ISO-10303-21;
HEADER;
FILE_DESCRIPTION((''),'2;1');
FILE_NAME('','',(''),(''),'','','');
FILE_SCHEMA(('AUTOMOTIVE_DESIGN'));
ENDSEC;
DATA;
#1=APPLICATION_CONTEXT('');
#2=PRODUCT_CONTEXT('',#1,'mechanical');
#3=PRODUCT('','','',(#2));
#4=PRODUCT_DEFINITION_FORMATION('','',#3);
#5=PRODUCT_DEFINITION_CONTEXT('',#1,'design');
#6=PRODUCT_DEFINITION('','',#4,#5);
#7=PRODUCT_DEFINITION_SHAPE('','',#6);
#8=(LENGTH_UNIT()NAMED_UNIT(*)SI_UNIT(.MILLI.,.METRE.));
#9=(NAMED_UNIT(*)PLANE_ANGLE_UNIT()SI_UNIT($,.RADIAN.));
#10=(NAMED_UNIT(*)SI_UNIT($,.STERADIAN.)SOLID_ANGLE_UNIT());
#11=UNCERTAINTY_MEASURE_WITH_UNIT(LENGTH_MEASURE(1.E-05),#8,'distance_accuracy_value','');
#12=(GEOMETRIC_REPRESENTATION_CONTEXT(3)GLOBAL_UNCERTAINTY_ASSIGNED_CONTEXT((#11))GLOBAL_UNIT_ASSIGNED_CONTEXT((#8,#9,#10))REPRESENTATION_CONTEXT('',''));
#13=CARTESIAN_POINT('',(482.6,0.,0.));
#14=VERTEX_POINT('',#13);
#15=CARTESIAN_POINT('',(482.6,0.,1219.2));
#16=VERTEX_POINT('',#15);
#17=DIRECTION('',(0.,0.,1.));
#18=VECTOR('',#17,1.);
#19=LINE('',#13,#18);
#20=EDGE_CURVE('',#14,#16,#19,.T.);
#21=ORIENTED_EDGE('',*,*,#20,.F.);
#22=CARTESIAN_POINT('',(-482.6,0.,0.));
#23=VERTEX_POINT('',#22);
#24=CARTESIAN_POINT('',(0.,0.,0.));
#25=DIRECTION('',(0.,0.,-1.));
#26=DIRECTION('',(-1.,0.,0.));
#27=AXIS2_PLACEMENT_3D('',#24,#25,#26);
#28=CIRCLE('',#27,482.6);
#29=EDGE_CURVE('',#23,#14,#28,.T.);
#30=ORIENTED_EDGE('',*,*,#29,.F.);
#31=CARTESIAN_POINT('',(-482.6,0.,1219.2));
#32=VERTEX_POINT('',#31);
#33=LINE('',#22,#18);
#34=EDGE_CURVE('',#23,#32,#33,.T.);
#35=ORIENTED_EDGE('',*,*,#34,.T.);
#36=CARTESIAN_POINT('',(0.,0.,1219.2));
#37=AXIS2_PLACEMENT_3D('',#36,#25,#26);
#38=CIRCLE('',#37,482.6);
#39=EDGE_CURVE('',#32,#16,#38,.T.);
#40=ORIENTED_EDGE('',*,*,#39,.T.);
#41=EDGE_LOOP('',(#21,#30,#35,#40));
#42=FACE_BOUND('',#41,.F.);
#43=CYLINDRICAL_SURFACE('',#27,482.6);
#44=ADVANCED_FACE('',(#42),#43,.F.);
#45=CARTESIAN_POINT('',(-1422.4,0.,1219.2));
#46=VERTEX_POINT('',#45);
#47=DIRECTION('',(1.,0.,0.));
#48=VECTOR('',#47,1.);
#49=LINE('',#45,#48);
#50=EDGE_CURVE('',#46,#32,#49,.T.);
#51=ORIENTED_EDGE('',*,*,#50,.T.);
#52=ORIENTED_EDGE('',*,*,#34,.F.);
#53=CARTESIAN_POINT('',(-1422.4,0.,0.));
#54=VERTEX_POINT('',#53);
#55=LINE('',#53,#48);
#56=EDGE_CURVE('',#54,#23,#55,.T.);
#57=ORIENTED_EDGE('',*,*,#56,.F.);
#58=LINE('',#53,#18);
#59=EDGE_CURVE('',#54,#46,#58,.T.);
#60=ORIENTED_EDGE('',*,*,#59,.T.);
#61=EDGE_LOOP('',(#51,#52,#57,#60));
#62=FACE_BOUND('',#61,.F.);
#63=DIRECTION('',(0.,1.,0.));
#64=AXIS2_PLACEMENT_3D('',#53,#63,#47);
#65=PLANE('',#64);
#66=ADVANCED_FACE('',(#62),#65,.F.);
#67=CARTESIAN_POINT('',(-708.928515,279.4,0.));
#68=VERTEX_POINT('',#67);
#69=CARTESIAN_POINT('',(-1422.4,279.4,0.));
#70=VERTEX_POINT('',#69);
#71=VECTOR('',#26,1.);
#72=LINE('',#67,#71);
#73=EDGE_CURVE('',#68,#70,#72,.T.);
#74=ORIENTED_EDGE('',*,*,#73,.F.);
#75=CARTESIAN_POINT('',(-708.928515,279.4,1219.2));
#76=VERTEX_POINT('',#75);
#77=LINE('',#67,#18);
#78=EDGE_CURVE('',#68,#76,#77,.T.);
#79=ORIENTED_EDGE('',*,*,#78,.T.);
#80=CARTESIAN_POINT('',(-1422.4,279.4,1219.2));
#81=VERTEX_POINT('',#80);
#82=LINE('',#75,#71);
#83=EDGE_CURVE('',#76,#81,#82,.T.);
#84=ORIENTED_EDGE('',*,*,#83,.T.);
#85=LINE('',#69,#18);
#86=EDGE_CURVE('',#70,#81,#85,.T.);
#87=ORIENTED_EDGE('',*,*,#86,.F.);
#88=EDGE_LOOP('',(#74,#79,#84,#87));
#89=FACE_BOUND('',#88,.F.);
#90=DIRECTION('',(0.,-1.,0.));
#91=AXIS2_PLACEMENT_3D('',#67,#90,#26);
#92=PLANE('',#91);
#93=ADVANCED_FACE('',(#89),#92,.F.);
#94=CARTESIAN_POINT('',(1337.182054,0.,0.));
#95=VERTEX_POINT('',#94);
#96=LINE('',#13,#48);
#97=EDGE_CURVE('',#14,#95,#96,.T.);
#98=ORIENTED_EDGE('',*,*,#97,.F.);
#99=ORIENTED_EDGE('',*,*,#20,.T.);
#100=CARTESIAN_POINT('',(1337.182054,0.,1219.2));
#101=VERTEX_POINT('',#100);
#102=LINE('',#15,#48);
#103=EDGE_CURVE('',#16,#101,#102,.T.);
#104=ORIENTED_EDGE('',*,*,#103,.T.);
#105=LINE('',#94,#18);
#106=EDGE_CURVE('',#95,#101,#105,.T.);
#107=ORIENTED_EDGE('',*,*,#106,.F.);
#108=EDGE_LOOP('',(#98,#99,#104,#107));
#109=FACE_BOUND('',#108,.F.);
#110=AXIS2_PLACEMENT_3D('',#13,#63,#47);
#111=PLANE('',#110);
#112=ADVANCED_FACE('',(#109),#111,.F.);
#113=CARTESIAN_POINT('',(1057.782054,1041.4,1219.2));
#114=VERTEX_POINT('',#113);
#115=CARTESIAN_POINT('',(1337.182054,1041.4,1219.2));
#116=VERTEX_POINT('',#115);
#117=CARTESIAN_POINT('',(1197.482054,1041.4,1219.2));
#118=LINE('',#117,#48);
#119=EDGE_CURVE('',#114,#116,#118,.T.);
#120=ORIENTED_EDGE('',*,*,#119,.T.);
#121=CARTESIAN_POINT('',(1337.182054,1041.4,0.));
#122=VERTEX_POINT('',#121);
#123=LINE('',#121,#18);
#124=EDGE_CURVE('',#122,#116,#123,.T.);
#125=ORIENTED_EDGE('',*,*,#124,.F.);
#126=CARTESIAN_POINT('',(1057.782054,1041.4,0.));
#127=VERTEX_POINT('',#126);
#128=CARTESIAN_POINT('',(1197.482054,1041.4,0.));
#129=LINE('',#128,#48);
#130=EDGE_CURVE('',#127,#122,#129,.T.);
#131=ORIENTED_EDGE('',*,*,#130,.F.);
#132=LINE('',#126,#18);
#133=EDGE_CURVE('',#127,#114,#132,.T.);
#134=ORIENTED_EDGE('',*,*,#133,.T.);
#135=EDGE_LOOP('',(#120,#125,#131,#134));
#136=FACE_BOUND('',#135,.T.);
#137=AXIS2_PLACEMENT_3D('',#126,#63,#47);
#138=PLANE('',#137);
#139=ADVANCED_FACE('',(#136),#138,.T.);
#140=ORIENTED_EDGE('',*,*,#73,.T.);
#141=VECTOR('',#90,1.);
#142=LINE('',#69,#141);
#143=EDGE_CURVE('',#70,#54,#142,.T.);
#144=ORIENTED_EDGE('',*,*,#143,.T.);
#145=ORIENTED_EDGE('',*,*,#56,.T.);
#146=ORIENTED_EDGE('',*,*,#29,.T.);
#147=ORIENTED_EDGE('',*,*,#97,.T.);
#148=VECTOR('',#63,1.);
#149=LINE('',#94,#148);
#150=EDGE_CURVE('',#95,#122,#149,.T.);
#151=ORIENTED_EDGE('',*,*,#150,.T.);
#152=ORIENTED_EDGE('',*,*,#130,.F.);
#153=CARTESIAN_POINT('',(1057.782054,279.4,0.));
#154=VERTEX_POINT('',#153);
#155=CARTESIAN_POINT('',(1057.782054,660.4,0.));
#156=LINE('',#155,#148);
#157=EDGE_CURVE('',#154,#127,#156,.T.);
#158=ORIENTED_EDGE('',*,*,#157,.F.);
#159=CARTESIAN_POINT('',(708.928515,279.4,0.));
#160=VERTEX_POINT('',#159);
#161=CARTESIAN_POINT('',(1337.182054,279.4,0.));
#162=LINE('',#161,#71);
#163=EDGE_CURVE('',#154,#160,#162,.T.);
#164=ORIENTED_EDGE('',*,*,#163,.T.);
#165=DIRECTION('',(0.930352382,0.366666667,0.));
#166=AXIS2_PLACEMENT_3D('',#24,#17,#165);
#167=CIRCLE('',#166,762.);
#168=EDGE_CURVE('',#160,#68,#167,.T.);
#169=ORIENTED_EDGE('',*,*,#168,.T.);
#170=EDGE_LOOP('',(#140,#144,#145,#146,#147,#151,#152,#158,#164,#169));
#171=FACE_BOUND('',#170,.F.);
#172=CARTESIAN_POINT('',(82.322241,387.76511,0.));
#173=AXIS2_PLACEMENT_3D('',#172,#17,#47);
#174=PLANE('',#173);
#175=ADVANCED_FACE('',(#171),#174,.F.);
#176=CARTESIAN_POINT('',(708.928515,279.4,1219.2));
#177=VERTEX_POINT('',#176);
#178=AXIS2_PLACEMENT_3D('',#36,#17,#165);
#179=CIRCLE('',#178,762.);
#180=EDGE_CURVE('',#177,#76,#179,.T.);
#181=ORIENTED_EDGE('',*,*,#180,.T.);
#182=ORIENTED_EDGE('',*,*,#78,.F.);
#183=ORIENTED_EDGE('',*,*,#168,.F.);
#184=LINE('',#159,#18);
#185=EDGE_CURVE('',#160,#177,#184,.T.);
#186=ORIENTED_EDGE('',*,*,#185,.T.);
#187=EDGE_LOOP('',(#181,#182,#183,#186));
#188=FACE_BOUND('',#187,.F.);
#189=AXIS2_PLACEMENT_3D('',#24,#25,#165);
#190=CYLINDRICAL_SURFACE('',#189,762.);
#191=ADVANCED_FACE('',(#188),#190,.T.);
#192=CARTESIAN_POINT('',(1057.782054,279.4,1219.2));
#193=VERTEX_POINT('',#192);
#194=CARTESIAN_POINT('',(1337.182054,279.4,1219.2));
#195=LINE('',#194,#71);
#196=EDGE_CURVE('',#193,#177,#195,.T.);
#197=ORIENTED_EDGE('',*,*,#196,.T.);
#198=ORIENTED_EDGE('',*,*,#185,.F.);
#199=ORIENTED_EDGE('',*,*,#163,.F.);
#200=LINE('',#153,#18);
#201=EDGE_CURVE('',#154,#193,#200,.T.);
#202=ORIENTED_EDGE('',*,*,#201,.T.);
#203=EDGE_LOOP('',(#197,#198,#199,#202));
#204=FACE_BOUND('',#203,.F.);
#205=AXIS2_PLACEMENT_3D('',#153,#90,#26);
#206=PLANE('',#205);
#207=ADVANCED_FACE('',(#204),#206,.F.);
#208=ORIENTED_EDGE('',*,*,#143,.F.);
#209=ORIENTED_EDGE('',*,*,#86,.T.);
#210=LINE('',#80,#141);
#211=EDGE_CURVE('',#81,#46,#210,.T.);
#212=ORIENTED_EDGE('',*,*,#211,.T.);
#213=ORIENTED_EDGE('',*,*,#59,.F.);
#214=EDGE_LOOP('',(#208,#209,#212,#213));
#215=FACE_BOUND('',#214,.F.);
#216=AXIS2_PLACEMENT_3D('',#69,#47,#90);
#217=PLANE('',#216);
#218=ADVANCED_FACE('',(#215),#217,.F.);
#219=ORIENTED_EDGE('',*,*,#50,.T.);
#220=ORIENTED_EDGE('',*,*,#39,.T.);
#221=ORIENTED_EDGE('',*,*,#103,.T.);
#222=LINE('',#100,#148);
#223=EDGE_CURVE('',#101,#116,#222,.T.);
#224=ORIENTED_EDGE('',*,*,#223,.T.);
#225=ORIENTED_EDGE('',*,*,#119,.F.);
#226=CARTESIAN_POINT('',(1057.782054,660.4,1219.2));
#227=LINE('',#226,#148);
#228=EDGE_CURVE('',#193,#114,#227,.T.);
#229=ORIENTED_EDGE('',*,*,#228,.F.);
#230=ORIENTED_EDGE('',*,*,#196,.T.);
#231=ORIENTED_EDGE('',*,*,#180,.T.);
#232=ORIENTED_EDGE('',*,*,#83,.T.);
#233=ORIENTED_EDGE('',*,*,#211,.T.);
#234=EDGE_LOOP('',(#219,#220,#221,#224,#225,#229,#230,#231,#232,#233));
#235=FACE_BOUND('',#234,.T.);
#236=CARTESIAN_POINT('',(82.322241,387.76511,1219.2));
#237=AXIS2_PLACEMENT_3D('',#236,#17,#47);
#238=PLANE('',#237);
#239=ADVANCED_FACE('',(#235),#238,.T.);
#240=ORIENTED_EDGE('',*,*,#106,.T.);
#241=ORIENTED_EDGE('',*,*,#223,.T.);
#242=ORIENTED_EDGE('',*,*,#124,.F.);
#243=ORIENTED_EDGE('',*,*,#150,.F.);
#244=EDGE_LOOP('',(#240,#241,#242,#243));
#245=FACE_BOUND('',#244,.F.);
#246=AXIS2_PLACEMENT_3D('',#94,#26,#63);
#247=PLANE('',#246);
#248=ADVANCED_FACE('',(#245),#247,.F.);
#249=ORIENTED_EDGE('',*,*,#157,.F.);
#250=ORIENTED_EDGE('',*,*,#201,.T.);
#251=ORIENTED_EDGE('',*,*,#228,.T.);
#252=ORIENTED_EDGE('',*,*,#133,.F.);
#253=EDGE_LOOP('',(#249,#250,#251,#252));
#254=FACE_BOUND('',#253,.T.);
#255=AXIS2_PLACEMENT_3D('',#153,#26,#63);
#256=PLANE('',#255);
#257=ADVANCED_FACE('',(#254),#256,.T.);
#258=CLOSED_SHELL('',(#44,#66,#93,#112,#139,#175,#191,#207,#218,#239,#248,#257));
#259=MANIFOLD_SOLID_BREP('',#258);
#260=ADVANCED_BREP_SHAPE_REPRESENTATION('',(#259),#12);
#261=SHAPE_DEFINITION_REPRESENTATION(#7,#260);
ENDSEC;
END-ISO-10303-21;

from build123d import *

# Parameters (mm, degrees)
F0_W     = 279.4
F0_H     = 279.4
F0_H_2   = 762
F1_DEPTH = 1219.2


with BuildPart() as f1:
    # F0 (on Top) → F1 (new body)
    with BuildSketch(Plane.XY):
        with BuildLine():
            Line((482.6, 0), (762, 0))
            ThreePointArc((762, 0), (748.6145632978, 142.1978748731), (708.9285154372, 279.4))
            ThreePointArc((708.9285154372, 279.4), (0, 762), (-708.9285154372, 279.4))
            Line((-708.9285154372, 279.4), (-393.4951079747, 279.4))
            ThreePointArc((-393.4951079747, 279.4), (146.6322285369, 459.7844598878), (482.6, 0))
        make_face()
        with BuildLine():
            ThreePointArc((708.9285154372, 279.4), (748.6145632978, 142.1978748731), (762, 0))
            Line((762, 0), (1057.7820539474, 0))
            Line((1057.7820539474, 0), (1057.7820539474, 279.4))
            Line((1057.7820539474, 279.4), (708.9285154372, 279.4))
        make_face()
        with Locations((1197.4820539474, 139.7)):
            Rectangle(F0_W, F0_H)
        with BuildLine():
            Line((-393.4951079747, 279.4), (-708.9285154372, 279.4))
            ThreePointArc((-708.9285154372, 279.4), (-748.6145632978, 142.1978748731), (-762, 0))
            Line((-762, 0), (-482.6, 0))
            ThreePointArc((-482.6, 0), (-459.7844598878, 146.6322285369), (-393.4951079747, 279.4))
        make_face()
        with BuildLine():
            ThreePointArc((-762, 0), (-748.6145632978, 142.1978748731), (-708.9285154372, 279.4))
            Line((-708.9285154372, 279.4), (-1422.4, 279.4))
            Line((-1422.4, 279.4), (-1422.4, 0))
            Line((-1422.4, 0), (-762, 0))
        make_face()
        with Locations((1197.4820539474, 660.4)):
            Rectangle(F0_W, F0_H_2)
    extrude(amount=F1_DEPTH)


solid = f1.part
